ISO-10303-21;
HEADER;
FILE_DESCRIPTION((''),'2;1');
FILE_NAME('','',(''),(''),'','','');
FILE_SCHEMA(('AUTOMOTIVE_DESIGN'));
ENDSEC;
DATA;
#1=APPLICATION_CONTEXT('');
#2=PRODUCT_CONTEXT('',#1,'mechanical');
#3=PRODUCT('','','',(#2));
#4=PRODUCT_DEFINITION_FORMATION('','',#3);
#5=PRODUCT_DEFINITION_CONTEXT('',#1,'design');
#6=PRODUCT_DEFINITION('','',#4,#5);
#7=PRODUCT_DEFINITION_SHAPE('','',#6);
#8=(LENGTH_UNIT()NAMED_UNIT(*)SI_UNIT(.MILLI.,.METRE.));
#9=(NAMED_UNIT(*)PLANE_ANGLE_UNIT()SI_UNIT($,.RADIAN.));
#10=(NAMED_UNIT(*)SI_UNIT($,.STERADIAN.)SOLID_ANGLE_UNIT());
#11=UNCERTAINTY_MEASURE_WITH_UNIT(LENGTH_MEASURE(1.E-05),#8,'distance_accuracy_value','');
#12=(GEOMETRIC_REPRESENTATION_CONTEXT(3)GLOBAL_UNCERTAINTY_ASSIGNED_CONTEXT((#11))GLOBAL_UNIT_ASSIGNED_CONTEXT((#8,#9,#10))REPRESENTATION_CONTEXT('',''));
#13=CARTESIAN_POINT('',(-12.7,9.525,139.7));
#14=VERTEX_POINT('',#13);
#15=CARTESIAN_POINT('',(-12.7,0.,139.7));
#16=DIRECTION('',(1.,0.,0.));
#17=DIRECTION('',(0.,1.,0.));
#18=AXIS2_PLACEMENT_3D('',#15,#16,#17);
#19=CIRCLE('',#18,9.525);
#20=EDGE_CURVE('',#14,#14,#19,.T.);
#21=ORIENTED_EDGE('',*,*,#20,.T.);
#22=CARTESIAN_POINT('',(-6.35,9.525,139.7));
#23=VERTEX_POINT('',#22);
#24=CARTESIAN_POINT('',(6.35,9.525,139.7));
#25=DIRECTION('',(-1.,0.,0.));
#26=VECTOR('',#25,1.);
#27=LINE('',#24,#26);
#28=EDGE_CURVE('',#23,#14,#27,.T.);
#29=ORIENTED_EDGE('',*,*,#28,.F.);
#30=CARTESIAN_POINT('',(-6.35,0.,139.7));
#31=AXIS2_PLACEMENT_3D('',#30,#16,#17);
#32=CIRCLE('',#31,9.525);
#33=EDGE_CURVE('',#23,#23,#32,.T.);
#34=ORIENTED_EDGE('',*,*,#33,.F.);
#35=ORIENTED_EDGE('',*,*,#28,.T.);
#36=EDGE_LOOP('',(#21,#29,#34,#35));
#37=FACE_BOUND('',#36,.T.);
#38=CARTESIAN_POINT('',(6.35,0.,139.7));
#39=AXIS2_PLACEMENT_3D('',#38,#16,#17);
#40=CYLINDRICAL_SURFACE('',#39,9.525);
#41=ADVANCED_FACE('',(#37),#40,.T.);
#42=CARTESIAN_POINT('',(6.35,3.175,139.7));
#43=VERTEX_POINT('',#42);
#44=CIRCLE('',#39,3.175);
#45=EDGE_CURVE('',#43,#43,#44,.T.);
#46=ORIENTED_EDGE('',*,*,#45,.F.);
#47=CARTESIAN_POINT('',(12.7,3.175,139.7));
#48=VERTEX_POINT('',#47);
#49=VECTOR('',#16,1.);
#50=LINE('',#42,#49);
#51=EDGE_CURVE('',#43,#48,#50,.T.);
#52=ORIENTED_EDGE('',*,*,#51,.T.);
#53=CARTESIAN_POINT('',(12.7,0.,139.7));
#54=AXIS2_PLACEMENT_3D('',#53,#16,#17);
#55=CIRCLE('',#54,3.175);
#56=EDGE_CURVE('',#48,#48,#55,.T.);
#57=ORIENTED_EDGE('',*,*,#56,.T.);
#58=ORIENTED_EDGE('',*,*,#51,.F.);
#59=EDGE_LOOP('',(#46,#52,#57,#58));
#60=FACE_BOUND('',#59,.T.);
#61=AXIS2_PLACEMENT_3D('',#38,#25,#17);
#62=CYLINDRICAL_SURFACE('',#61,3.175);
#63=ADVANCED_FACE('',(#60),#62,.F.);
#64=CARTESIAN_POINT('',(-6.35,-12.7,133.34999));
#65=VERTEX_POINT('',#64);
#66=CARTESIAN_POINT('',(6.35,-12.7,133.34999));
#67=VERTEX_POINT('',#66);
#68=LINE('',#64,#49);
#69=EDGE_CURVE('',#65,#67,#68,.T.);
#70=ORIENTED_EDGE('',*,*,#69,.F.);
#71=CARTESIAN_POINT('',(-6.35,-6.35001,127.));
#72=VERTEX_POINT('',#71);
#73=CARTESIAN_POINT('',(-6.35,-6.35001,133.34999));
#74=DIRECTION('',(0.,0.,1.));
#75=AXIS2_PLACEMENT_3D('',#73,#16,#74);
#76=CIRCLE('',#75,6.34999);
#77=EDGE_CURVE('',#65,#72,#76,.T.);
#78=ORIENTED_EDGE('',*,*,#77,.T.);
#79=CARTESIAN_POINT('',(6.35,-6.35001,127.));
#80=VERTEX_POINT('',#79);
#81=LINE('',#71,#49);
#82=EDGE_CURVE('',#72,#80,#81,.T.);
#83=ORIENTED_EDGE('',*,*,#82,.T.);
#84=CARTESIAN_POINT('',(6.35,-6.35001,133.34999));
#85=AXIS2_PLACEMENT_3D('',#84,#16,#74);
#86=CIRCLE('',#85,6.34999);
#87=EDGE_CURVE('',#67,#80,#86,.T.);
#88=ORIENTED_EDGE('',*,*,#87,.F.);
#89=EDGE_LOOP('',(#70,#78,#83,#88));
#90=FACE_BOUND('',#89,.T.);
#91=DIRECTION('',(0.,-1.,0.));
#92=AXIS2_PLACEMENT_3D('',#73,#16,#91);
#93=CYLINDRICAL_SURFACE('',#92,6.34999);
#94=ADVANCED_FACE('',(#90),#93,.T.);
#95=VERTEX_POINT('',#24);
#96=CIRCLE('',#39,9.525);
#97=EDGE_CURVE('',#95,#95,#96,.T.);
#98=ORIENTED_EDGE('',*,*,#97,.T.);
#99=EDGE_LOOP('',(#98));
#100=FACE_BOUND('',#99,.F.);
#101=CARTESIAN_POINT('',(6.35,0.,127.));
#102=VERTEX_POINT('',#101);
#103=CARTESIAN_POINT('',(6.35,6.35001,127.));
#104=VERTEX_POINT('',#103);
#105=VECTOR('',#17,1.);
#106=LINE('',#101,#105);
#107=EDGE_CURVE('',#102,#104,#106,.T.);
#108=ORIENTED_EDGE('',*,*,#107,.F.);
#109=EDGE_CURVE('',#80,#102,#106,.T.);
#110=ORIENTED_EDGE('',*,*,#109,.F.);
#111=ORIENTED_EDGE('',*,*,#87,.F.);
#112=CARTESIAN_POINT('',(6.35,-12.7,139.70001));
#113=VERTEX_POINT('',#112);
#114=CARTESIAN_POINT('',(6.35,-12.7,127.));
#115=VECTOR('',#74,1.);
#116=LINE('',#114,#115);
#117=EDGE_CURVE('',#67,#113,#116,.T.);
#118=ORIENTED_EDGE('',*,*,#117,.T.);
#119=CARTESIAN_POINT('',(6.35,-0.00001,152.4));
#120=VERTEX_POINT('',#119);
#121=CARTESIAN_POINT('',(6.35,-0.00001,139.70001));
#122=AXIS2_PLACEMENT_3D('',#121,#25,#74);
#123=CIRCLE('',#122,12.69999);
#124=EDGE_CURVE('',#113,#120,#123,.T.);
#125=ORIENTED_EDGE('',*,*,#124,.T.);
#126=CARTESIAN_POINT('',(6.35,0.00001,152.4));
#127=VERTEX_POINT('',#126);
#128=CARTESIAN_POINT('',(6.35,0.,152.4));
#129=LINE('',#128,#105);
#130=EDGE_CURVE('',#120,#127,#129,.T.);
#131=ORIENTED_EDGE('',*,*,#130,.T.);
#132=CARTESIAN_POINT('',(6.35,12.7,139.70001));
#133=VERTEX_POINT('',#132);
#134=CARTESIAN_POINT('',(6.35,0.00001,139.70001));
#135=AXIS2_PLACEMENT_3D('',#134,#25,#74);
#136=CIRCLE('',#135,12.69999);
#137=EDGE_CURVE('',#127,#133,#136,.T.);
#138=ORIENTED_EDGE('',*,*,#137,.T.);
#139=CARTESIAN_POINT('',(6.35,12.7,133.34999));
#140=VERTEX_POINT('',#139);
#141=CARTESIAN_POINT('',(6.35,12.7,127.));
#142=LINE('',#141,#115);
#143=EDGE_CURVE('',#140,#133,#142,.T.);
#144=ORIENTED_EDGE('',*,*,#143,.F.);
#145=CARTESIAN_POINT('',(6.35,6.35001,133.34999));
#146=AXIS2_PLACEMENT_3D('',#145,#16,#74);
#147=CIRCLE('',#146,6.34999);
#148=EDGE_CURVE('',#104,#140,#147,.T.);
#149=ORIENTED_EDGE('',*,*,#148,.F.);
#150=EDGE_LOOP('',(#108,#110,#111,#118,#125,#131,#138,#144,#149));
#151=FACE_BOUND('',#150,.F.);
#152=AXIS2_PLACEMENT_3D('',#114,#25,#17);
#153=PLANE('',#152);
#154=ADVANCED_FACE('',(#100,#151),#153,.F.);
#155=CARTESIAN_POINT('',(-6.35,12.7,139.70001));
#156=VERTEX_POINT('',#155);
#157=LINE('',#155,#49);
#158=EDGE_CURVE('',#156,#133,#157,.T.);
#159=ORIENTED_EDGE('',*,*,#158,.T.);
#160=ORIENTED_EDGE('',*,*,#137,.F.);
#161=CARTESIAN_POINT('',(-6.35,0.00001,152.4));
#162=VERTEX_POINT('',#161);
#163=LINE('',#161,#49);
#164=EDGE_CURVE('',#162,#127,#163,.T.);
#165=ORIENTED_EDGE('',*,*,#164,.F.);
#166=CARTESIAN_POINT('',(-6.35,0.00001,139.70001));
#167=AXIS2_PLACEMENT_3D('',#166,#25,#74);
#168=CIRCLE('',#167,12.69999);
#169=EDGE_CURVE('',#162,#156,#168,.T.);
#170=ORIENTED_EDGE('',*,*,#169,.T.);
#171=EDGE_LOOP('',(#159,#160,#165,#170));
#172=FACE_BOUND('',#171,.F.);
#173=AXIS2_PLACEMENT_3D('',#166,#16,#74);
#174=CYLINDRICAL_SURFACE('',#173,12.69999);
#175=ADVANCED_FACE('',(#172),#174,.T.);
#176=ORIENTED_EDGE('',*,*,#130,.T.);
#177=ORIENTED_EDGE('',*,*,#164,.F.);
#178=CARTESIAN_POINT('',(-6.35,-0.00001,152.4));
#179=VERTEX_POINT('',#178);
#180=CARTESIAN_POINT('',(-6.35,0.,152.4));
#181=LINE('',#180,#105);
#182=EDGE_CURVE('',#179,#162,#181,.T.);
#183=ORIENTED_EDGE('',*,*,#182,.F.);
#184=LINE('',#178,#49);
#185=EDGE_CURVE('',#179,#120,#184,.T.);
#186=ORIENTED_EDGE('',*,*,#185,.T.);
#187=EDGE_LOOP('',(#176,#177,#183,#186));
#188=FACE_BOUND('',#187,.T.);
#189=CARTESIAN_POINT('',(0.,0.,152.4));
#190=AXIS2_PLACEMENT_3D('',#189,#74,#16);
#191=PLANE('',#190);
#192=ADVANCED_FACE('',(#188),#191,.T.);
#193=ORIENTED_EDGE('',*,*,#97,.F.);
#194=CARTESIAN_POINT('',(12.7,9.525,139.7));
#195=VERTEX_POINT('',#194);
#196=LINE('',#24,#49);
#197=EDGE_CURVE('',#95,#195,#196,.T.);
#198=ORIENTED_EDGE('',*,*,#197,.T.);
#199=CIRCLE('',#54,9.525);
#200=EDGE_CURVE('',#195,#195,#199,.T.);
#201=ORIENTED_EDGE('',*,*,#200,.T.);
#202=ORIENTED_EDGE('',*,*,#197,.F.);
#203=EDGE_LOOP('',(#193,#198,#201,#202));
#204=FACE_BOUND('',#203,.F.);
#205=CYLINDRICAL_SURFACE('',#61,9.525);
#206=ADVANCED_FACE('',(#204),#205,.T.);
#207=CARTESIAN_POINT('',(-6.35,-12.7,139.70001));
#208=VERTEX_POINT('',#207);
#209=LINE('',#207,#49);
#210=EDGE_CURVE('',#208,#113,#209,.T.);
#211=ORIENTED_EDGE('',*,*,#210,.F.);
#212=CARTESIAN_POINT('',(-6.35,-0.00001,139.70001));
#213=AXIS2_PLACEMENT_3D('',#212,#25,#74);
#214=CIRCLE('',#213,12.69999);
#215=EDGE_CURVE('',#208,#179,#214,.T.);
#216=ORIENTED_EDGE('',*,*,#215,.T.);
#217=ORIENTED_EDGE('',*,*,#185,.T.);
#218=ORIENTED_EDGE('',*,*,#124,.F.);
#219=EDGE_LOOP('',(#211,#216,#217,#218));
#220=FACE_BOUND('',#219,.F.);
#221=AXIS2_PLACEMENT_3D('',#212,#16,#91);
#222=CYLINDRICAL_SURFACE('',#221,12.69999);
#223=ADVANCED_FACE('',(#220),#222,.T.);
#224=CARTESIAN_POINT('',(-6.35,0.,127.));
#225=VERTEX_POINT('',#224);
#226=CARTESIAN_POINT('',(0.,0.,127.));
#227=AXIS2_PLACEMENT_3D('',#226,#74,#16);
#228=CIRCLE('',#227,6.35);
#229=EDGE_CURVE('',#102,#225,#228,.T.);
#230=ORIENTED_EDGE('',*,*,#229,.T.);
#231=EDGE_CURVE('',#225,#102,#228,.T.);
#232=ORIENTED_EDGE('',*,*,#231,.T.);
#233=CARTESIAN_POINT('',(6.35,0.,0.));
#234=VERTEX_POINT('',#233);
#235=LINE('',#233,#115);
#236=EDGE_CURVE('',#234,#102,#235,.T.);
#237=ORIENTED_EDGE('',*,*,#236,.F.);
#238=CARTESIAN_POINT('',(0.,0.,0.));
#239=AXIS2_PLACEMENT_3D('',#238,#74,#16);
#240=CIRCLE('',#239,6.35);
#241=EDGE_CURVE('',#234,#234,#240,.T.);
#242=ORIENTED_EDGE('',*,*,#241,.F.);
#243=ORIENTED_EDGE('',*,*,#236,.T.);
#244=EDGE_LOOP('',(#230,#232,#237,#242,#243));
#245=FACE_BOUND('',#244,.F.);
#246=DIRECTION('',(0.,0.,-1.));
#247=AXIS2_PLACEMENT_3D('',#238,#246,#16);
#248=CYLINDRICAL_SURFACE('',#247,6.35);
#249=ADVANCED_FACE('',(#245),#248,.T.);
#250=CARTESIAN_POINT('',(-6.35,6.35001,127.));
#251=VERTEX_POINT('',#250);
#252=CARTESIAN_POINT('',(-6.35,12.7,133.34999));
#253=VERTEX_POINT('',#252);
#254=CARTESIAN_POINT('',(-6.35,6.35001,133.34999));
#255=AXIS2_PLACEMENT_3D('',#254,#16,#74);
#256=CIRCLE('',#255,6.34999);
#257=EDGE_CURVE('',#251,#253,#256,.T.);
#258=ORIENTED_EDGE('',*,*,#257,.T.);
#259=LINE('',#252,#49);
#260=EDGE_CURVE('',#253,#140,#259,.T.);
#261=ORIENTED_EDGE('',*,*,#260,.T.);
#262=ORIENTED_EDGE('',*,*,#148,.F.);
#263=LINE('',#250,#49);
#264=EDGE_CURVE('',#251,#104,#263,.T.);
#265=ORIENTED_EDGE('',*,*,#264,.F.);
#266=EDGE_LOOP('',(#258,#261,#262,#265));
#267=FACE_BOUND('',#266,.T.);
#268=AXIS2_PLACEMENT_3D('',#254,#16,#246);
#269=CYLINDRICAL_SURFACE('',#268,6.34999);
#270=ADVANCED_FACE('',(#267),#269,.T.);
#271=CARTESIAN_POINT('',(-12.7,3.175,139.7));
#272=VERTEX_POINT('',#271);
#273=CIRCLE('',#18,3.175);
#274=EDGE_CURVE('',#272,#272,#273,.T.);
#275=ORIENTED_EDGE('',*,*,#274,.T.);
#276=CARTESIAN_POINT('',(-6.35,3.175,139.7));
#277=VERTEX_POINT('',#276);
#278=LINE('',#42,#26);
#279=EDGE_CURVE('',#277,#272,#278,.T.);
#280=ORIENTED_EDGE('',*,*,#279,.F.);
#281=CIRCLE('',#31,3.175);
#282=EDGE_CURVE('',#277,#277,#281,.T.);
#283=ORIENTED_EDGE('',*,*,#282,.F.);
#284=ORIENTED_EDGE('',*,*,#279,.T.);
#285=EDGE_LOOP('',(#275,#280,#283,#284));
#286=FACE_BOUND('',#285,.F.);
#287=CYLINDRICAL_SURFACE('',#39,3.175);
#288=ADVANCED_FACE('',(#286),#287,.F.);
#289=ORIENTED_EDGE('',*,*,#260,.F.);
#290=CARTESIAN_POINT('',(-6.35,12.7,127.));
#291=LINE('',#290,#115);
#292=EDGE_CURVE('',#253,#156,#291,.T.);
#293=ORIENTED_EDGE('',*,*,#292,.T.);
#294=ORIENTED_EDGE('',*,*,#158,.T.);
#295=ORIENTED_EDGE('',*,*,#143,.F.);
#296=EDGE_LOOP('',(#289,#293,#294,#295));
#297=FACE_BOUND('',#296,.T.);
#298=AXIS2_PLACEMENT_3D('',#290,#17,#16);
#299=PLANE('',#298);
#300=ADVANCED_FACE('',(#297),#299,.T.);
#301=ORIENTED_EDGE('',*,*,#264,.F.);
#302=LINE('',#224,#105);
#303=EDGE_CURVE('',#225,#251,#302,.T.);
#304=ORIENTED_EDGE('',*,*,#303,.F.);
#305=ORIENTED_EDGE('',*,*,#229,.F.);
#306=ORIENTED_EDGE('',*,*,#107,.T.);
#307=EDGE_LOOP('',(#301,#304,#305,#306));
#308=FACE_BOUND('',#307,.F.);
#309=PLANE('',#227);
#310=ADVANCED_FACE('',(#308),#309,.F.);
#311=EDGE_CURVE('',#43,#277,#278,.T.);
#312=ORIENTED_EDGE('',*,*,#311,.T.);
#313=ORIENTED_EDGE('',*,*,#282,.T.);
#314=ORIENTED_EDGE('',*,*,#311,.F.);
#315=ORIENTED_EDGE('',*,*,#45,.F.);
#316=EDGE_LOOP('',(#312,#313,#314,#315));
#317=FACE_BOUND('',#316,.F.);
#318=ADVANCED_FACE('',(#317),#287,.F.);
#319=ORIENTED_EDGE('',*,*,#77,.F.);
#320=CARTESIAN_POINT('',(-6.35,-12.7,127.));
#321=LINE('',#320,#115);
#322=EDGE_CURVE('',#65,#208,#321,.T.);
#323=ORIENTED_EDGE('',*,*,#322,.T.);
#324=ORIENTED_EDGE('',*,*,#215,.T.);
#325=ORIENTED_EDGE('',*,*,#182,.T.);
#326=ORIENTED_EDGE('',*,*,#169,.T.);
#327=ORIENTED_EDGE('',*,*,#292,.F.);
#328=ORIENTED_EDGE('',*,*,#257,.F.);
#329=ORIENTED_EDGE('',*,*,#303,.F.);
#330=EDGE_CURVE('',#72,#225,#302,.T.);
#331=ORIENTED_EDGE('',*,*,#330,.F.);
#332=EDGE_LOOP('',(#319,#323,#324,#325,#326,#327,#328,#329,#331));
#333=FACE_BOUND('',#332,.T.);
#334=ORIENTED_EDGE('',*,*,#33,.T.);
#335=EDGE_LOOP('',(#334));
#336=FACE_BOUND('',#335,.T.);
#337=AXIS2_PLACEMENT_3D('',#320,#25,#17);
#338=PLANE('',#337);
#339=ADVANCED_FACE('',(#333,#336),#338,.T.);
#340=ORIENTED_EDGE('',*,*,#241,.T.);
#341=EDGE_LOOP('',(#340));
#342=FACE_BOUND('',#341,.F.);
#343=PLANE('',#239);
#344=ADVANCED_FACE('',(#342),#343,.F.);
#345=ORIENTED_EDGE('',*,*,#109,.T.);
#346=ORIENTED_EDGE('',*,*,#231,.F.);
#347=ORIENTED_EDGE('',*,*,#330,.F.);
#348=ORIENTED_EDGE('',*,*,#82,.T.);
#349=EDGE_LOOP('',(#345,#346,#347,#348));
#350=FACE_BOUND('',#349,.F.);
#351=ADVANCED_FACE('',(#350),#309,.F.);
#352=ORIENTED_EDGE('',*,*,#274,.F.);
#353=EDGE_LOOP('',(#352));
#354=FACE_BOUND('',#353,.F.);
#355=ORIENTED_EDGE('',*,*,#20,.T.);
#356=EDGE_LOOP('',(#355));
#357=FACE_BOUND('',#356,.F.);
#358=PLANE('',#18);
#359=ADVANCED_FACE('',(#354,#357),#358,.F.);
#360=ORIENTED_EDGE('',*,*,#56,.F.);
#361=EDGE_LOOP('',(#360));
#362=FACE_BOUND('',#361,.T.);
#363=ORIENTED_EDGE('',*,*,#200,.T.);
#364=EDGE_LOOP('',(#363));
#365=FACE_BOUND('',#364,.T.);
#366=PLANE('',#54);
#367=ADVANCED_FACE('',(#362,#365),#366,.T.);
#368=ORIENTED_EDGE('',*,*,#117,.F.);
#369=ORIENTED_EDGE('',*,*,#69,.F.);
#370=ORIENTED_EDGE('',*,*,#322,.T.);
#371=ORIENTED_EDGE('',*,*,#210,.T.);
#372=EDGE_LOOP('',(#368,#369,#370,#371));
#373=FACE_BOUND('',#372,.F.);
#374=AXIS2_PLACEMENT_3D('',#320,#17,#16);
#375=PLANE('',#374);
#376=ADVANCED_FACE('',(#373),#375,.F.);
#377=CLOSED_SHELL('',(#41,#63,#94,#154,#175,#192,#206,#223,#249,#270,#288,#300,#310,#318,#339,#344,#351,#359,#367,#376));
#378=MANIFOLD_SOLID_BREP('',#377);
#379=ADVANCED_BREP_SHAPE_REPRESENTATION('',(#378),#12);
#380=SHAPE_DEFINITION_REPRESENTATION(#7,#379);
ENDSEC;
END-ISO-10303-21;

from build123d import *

# Parameters (mm, degrees)
F0_R          = 6.35
F1_DEPTH      = 127
F2_W          = 12.7
F2_H          = 25.4
F3_DEPTH      = 25.4
F4_R          = 9.525
F4_R_2        = 3.175
F5_DEPTH      = 6.35
F5_DEPTH_BACK = 19.05
F6_DEPTH      = 25.4
F7_R          = 6.34999
F8_R          = 12.69999


# Not quite as in the source:
# - a fillet or chamfer is up to 0.001 mm smaller than in the source, because OpenCascade refuses the exact size


with BuildPart() as f1:
    # F0 (on Top) → F1 (new body)
    with BuildSketch(Plane.XY):
        Circle(F0_R)
    extrude(amount=F1_DEPTH)

    # F2 (on face) → F3 (join)
    with BuildSketch(Plane.XY.offset(127)):
        Rectangle(F2_W, F2_H)
    extrude(amount=F3_DEPTH)

    # F4 (on face) → F5 (join, two sides)
    with BuildSketch(Plane.YZ.offset(6.35)) as f5_sk:
        with Locations((0, 139.7)):
            Circle(F4_R)
        with Locations((0, 139.7)):
            Circle(F4_R_2, mode=Mode.SUBTRACT)
    extrude(amount=F5_DEPTH)
    extrude(f5_sk.sketch, amount=-F5_DEPTH_BACK)

    # F6 (cut): a face of the model
    f6_faces = [f1.faces().sort_by_distance(p)[0] for p in [
        (6.35, 0, 139.7),
    ]]
    extrude(f6_faces, amount=-F6_DEPTH, mode=Mode.SUBTRACT)

    # F7 (radius 6.35 in the source; OpenCascade refuses exactly that, so slightly less here)
    f7_edges = [f1.edges().sort_by_distance(p)[0] for p in [
        (0, -12.7, 127),
        (0, 12.7, 127),
    ]]
    fillet(f7_edges, radius=F7_R)

    # F8 (radius 12.7 in the source; OpenCascade refuses exactly that, so slightly less here)
    f8_edges = [f1.edges().sort_by_distance(p)[0] for p in [
        (0, -12.7, 152.4),
        (0, 12.7, 152.4),
    ]]
    fillet(f8_edges, radius=F8_R)


solid = f1.part
